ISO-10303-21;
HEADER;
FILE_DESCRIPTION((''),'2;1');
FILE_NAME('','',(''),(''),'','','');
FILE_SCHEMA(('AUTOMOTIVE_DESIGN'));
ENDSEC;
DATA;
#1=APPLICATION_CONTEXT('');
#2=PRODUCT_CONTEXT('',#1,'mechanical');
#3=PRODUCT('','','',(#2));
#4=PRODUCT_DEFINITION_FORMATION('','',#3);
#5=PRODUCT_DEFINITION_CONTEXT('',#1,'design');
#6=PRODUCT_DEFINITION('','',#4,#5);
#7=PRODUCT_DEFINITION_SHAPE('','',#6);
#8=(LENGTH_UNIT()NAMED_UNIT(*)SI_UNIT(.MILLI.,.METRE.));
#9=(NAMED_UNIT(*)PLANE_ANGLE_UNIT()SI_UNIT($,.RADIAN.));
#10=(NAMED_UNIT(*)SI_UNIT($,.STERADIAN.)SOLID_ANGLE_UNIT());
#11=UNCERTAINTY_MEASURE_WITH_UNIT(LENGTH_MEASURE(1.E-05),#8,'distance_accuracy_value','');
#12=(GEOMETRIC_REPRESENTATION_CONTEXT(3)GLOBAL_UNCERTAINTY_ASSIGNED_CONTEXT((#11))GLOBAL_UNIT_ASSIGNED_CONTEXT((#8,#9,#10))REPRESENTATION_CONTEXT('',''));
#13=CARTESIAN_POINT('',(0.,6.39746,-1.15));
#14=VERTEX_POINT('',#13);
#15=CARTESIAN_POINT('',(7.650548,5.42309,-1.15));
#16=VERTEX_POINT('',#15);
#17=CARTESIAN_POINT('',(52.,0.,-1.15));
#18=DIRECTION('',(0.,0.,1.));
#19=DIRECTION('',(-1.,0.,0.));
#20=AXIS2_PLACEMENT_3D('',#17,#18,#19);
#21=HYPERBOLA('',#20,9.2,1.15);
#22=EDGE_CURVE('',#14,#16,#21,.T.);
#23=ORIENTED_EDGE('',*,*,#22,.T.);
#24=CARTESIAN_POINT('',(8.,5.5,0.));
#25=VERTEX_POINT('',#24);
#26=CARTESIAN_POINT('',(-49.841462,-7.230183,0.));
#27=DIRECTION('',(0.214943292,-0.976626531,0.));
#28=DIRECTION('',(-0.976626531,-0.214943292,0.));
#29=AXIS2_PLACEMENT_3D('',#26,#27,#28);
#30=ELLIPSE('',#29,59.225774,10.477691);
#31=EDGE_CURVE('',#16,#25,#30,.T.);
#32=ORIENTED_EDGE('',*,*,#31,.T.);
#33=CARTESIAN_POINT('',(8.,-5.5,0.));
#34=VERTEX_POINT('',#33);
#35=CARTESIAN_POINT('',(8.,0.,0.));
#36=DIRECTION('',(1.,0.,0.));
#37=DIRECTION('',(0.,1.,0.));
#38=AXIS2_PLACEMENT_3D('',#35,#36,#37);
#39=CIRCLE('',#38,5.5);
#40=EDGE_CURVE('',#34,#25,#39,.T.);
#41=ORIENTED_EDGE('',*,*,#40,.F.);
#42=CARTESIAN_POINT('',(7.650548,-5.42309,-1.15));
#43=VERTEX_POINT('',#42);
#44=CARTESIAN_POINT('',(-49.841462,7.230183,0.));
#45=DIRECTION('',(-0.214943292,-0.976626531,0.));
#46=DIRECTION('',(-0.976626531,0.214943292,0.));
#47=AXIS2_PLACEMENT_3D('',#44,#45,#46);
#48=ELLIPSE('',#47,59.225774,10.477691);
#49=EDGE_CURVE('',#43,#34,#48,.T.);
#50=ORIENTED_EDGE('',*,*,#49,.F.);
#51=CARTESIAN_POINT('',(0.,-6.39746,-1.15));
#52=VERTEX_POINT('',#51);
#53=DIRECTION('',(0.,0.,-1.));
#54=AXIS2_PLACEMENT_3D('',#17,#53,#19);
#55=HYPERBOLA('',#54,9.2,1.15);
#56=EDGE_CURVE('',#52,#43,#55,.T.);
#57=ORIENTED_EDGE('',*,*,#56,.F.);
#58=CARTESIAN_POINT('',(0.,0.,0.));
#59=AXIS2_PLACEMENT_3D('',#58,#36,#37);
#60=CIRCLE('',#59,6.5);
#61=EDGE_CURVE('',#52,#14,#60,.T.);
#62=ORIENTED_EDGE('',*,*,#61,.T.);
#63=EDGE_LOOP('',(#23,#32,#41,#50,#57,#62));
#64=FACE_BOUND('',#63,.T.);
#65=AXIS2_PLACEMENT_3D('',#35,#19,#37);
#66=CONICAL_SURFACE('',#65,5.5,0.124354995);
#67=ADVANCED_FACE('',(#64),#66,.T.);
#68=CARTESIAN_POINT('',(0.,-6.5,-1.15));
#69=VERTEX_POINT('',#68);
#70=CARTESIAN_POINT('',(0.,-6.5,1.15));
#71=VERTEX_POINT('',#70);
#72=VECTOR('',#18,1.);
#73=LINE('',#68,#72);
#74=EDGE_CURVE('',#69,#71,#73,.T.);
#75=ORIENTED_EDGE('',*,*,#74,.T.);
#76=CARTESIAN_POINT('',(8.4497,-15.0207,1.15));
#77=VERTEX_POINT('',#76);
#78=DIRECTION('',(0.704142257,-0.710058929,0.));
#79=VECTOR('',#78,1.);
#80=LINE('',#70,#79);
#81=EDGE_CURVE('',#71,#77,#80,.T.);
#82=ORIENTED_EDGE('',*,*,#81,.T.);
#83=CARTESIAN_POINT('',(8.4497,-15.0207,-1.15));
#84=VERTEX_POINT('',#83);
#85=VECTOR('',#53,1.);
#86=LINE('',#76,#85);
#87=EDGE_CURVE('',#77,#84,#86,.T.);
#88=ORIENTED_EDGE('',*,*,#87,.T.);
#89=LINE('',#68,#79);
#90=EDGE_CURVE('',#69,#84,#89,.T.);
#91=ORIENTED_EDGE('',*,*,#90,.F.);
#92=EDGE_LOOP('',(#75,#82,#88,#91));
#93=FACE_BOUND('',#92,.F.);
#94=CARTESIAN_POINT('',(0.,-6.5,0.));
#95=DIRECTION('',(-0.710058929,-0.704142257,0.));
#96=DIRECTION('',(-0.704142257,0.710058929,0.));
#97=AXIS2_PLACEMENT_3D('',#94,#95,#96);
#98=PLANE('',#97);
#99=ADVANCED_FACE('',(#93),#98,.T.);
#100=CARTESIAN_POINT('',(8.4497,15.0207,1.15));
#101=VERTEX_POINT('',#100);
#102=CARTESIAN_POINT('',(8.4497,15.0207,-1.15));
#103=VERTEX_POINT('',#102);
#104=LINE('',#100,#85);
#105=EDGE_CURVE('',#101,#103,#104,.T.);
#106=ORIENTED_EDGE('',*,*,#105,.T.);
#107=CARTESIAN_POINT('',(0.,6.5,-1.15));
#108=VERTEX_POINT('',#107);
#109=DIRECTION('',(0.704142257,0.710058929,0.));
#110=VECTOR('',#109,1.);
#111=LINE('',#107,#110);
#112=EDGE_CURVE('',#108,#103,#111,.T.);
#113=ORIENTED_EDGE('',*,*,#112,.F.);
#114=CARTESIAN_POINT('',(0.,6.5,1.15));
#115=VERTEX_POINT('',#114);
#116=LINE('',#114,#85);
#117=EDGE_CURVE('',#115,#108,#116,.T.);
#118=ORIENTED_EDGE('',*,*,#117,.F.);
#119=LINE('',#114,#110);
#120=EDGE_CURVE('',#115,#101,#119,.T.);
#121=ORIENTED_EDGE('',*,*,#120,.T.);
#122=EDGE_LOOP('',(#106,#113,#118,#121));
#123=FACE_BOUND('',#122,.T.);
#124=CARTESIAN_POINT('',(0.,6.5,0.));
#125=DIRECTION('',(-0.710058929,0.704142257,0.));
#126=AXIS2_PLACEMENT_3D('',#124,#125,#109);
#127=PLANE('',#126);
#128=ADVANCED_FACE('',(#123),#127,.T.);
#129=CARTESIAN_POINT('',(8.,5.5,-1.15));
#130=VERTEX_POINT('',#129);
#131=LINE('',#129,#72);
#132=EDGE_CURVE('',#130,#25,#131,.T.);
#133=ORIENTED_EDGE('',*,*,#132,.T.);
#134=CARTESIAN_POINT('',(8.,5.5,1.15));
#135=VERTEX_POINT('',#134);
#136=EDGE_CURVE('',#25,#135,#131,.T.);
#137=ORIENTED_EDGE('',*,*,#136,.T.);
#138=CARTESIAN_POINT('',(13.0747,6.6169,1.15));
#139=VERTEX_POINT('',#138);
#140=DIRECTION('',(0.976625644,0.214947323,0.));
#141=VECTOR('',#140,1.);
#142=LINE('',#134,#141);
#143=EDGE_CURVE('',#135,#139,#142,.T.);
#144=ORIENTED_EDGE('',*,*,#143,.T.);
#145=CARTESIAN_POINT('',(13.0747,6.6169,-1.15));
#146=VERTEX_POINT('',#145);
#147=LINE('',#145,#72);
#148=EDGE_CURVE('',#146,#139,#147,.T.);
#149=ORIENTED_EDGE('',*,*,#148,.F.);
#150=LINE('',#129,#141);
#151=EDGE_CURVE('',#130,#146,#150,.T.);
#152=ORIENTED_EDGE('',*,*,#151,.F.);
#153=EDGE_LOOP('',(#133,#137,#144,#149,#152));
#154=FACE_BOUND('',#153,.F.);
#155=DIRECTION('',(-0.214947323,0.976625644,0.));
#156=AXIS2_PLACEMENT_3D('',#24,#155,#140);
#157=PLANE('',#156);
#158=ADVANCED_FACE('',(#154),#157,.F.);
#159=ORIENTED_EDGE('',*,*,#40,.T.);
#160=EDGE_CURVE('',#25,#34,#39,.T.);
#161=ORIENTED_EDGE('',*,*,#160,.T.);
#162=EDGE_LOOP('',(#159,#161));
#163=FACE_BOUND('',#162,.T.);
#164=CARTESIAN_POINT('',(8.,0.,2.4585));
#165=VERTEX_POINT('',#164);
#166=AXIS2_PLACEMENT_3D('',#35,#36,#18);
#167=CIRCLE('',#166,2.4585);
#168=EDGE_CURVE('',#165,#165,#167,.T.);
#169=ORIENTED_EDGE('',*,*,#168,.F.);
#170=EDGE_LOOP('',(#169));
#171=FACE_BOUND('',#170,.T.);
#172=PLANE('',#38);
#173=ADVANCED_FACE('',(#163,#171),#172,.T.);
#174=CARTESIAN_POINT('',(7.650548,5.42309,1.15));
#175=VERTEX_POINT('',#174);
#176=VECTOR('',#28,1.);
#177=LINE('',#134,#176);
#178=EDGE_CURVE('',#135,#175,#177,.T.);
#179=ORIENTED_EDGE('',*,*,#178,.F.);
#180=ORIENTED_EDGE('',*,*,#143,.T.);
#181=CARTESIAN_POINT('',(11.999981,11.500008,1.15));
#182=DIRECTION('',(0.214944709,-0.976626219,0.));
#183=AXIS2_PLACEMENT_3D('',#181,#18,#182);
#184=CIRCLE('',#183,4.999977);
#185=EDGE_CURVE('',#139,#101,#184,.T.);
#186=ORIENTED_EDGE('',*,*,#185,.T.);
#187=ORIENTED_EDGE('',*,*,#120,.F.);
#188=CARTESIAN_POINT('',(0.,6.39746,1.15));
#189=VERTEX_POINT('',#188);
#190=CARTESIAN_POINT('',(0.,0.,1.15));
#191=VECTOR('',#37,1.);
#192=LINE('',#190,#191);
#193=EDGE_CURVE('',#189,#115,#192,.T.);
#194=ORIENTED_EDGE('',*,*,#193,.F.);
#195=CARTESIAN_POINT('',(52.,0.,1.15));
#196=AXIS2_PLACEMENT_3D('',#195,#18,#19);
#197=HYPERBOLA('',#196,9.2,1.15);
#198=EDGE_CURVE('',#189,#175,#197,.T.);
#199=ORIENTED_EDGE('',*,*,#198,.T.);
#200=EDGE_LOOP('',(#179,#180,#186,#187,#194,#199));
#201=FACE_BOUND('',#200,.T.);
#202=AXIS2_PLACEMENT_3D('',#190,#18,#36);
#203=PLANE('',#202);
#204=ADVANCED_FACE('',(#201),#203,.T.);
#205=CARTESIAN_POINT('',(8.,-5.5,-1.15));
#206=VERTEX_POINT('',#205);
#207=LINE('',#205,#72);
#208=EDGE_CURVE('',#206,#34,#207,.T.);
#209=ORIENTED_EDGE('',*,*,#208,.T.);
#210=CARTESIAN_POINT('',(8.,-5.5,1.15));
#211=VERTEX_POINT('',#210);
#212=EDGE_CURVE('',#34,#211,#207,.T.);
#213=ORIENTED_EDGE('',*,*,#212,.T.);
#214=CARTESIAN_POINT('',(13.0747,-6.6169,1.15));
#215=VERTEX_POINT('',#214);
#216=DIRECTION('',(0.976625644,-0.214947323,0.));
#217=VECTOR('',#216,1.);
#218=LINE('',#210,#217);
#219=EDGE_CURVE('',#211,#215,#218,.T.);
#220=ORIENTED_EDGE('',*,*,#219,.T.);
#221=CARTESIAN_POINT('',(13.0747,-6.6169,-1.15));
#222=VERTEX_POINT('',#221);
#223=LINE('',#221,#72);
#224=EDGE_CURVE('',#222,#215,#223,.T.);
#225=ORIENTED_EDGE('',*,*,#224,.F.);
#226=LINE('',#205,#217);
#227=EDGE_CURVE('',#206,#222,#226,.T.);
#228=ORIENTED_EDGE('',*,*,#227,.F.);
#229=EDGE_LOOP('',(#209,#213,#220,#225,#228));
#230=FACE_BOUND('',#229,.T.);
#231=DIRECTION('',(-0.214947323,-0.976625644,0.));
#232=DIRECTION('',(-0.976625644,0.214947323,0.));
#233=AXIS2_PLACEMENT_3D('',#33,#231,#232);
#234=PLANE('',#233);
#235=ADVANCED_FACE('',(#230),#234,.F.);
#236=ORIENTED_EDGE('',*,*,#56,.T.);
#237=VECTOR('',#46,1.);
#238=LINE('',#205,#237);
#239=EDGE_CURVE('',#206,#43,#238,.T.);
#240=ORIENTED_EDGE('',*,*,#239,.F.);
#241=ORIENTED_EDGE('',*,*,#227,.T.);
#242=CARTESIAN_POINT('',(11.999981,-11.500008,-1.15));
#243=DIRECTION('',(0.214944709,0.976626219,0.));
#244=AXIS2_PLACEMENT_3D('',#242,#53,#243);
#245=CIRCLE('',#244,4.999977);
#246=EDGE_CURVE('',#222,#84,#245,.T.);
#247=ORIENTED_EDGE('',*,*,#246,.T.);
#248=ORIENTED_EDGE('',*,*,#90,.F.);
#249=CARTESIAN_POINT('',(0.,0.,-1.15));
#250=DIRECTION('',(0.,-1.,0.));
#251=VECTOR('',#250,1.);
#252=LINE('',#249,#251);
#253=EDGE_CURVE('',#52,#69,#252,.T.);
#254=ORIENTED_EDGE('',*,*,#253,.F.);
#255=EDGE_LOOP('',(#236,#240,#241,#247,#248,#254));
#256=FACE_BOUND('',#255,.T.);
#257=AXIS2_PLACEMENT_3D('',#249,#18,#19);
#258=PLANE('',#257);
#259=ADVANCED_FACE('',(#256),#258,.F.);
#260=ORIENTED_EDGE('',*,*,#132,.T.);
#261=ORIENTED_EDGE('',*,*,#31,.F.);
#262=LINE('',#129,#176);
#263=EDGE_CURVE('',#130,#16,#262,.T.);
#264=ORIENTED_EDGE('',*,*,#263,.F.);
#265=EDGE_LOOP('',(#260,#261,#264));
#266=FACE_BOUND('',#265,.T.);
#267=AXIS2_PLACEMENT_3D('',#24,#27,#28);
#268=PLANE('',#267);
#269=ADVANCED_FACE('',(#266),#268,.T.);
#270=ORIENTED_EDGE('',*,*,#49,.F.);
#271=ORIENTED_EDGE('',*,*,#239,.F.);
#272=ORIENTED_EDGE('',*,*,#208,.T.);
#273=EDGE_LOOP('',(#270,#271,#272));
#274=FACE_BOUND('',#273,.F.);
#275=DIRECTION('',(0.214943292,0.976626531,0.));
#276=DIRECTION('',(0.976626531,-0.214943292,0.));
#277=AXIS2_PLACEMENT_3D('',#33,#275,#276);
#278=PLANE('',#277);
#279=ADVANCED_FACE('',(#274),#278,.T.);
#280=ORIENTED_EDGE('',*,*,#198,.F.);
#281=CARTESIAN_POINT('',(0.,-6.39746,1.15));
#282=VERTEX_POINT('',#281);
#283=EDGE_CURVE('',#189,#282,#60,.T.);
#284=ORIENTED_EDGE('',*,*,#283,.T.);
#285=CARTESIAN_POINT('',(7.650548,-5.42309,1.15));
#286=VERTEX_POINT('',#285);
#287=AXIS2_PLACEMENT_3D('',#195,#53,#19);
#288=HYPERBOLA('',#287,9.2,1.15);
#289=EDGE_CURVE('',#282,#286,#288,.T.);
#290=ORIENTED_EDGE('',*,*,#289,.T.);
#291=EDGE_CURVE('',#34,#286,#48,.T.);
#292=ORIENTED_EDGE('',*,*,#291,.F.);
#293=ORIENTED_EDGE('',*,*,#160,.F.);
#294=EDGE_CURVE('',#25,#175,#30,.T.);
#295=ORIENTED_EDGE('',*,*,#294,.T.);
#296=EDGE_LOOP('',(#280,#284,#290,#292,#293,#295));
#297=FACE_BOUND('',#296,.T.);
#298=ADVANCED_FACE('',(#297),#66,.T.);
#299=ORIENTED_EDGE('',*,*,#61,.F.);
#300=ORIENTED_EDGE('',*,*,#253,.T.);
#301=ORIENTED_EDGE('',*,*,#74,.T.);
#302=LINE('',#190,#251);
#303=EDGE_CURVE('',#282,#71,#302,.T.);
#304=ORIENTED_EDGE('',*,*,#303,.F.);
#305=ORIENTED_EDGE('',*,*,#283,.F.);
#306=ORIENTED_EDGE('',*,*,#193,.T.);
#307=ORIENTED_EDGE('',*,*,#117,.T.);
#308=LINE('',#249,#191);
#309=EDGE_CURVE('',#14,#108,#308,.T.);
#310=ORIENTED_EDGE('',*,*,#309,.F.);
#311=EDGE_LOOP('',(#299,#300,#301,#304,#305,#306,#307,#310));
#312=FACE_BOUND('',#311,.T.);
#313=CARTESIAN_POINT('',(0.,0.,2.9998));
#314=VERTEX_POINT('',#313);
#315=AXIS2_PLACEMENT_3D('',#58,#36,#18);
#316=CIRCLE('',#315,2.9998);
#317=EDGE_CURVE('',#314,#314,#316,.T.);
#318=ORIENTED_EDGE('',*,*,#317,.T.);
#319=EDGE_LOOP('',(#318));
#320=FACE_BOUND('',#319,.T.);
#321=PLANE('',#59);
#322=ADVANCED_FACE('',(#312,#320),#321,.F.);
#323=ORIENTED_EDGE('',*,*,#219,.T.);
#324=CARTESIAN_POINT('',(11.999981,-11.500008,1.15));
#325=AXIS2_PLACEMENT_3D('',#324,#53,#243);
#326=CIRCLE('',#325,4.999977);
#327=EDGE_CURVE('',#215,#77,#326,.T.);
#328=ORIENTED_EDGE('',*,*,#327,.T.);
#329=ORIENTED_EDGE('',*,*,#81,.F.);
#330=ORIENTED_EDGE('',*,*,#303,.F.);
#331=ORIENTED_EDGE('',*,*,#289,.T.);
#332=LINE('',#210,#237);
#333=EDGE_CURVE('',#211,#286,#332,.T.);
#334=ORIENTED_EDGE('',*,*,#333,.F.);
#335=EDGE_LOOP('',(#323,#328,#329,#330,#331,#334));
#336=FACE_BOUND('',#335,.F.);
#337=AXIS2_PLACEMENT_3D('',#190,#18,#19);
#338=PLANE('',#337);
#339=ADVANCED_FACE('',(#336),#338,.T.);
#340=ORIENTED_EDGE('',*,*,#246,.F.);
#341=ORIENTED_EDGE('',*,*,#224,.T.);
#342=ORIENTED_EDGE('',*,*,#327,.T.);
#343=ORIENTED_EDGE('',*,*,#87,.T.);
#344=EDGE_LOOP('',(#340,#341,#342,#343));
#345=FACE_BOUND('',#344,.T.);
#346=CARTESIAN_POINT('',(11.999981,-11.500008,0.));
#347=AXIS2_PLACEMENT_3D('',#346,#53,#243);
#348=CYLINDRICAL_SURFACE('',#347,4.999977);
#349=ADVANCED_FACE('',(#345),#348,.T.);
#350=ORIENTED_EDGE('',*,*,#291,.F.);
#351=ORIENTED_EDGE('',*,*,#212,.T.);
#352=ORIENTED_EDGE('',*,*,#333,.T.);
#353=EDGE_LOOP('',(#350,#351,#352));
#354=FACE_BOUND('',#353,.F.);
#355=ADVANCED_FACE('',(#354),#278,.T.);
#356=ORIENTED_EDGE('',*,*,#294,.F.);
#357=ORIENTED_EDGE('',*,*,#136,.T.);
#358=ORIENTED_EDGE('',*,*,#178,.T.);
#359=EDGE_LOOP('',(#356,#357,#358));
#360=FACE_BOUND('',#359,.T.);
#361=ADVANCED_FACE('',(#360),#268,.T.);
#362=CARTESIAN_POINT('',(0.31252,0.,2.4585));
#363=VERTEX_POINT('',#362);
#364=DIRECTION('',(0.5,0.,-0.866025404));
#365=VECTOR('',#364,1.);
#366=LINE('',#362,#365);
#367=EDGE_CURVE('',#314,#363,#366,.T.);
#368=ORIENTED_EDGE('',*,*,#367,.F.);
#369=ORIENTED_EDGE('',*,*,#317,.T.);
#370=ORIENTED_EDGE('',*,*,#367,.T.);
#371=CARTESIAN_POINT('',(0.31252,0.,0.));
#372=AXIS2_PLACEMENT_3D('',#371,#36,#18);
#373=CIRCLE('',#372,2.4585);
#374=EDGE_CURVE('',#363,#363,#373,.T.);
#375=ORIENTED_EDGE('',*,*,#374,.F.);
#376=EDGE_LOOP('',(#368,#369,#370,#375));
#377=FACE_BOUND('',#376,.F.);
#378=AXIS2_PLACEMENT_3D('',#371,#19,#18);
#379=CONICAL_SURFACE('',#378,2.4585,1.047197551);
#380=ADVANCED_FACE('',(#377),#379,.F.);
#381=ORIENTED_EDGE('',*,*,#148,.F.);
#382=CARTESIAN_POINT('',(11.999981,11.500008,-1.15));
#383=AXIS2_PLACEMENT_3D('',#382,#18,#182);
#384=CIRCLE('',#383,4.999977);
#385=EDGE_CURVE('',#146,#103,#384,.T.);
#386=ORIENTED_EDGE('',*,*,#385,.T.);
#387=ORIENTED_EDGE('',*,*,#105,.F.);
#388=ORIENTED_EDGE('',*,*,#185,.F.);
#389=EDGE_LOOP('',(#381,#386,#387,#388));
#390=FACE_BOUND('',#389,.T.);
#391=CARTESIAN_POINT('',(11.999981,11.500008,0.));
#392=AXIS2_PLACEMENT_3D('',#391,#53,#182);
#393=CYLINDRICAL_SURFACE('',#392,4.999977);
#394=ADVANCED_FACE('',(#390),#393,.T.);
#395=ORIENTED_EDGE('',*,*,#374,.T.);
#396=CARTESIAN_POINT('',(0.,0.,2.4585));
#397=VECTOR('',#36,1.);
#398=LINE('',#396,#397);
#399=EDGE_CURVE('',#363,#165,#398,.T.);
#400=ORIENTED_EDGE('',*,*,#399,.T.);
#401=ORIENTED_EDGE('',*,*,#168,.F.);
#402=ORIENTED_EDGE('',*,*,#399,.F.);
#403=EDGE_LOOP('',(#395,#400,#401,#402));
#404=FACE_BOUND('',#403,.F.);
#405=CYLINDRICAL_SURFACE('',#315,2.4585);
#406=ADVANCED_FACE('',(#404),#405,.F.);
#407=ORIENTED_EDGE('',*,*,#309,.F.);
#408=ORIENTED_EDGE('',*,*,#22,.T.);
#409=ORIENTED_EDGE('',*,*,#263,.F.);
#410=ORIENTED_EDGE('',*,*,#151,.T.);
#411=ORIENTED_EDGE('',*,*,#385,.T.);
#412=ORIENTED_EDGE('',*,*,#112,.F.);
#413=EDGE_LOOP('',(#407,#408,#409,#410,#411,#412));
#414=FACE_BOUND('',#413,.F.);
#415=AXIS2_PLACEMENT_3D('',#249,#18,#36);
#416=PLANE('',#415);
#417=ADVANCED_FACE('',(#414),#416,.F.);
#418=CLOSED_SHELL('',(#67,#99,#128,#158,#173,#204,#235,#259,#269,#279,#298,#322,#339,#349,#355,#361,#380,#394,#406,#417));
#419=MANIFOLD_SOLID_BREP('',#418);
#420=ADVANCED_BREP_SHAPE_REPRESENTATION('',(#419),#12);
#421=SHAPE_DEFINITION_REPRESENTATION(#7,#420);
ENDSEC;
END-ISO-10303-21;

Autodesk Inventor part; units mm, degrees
ref_plane "YZ Plane" through (0, 0, 0) normal (1, 0, 0) x (0, 1, 0)
ref_plane "XZ Plane" through (0, 0, 0) normal (0, 1, 0) x (-1, 0, 0)
sketch "Эскиз1" plane through (0, 0, 0) normal (0, 0, 1) x (1, 0, 0)
  line L0 (0, 0) -> (8, 0)
  line L1 (0, 0) -> (0, 6.5)
  line L2 (8, 5.5) -> (8, 0)
  line L3 (0, 6.5) -> (8.4497, 15.0207)
  line L4 (8, 5.5) -> (13.0747, 6.6169)
  arc A0 (13.0747, 6.6169) -> (8.4497, 15.0207) centre (12, 11.5) ccw
  line L5 (8, 5.5) -> (0, 6.5)
  line L6 (8, 5.5) -> (0, 3.7393)
  dimension "d0" = 11
  dimension "d1" = 12
  dimension "d2" = 11.5
  dimension "d3" = 5
  dimension "d4" = 8
  dimension "d5" = 13
revolve "Базовый элемент" add sketch "Эскиз1" angle 360 about axis through (0, 0, 0) along (1, 0, 0) contours L1 L6 L2 L0 | L1 L5 L6
extrude "Крыло1" add sketch "Эскиз1" along normal mid plane 2.3 contours L1 L5 L6 | L5 L3 A0 L4
fillet "Сопряжение1" [suppressed]
mirror "Крыло2" about plane through (0, 0, 0) normal (0, 1, 0) of "Крыло1"
sketch "Эскиз2" plane through (0, 0, 0) normal (1, 0, 0) x (0, 1, 0)
  line L0 (0, -14) -> (0, 14) projected
  line L1 (-14, 0) -> (14, 0) projected
  point P0 (0, 0)
hole "Резьба" at (0, 0, 0) direction (1, 0, 0) diameter 4.917 end through all thread size "M6x1" class "6H" standard "ISO Metric profile"
chamfer "Фаска1" distance 0.5413 angle 30 1 edges at (0, 0, -2.4585) measured on face at (0, -5.0785, 0.0988)
ref_plane "Work Plane1" through (39.3319, 0, 0) normal (0, 0, -1) x (1, 0, 0)
equation "\"d0\" = KOD2"
equation "\"d1\" = KOH1 - RR"
equation "\"d2\" = 0.5 * E0 - RR"
equation "\"d3\" = RR"
equation "\"d4\" = KOH"
equation "\"d5\" = KOD"
equation "\"d6\" = SW"
equation "\"d8\" = 0.333333 * SW"
equation "\"d9\" = -0.5 * GD1 + 0.5 * NND"
equation "\"d109\" = -0.5 * GD1 + 0.5 * NND"
equation "\"NND\" = 6"
equation "\"KOH\" = 8"
equation "\"KOH1\" = 17"
equation "\"SW\" = 2.3"
equation "\"KOD\" = 13"
equation "\"KOD2\" = 11"
equation "\"RR\" = 5"
equation "\"E0\" = 33"
equation "\"GUL\" = 0.541266 * PTC"
equation "\"BOR\" = 0"
equation "\"PTC\" = 1"
equation "\"THREADDIA\" = 6"
equation "\"TOA\" = 30deg"
equation "\"RR2\" = 3"
equation "\"SW1\" = 3.3"
equation "\"GAL\" = 0.541266 * PTC"
equation "\"GD1\" = 4.917468"
properties part number "DIN 315 - M6" material "Сталь, мягкая"
